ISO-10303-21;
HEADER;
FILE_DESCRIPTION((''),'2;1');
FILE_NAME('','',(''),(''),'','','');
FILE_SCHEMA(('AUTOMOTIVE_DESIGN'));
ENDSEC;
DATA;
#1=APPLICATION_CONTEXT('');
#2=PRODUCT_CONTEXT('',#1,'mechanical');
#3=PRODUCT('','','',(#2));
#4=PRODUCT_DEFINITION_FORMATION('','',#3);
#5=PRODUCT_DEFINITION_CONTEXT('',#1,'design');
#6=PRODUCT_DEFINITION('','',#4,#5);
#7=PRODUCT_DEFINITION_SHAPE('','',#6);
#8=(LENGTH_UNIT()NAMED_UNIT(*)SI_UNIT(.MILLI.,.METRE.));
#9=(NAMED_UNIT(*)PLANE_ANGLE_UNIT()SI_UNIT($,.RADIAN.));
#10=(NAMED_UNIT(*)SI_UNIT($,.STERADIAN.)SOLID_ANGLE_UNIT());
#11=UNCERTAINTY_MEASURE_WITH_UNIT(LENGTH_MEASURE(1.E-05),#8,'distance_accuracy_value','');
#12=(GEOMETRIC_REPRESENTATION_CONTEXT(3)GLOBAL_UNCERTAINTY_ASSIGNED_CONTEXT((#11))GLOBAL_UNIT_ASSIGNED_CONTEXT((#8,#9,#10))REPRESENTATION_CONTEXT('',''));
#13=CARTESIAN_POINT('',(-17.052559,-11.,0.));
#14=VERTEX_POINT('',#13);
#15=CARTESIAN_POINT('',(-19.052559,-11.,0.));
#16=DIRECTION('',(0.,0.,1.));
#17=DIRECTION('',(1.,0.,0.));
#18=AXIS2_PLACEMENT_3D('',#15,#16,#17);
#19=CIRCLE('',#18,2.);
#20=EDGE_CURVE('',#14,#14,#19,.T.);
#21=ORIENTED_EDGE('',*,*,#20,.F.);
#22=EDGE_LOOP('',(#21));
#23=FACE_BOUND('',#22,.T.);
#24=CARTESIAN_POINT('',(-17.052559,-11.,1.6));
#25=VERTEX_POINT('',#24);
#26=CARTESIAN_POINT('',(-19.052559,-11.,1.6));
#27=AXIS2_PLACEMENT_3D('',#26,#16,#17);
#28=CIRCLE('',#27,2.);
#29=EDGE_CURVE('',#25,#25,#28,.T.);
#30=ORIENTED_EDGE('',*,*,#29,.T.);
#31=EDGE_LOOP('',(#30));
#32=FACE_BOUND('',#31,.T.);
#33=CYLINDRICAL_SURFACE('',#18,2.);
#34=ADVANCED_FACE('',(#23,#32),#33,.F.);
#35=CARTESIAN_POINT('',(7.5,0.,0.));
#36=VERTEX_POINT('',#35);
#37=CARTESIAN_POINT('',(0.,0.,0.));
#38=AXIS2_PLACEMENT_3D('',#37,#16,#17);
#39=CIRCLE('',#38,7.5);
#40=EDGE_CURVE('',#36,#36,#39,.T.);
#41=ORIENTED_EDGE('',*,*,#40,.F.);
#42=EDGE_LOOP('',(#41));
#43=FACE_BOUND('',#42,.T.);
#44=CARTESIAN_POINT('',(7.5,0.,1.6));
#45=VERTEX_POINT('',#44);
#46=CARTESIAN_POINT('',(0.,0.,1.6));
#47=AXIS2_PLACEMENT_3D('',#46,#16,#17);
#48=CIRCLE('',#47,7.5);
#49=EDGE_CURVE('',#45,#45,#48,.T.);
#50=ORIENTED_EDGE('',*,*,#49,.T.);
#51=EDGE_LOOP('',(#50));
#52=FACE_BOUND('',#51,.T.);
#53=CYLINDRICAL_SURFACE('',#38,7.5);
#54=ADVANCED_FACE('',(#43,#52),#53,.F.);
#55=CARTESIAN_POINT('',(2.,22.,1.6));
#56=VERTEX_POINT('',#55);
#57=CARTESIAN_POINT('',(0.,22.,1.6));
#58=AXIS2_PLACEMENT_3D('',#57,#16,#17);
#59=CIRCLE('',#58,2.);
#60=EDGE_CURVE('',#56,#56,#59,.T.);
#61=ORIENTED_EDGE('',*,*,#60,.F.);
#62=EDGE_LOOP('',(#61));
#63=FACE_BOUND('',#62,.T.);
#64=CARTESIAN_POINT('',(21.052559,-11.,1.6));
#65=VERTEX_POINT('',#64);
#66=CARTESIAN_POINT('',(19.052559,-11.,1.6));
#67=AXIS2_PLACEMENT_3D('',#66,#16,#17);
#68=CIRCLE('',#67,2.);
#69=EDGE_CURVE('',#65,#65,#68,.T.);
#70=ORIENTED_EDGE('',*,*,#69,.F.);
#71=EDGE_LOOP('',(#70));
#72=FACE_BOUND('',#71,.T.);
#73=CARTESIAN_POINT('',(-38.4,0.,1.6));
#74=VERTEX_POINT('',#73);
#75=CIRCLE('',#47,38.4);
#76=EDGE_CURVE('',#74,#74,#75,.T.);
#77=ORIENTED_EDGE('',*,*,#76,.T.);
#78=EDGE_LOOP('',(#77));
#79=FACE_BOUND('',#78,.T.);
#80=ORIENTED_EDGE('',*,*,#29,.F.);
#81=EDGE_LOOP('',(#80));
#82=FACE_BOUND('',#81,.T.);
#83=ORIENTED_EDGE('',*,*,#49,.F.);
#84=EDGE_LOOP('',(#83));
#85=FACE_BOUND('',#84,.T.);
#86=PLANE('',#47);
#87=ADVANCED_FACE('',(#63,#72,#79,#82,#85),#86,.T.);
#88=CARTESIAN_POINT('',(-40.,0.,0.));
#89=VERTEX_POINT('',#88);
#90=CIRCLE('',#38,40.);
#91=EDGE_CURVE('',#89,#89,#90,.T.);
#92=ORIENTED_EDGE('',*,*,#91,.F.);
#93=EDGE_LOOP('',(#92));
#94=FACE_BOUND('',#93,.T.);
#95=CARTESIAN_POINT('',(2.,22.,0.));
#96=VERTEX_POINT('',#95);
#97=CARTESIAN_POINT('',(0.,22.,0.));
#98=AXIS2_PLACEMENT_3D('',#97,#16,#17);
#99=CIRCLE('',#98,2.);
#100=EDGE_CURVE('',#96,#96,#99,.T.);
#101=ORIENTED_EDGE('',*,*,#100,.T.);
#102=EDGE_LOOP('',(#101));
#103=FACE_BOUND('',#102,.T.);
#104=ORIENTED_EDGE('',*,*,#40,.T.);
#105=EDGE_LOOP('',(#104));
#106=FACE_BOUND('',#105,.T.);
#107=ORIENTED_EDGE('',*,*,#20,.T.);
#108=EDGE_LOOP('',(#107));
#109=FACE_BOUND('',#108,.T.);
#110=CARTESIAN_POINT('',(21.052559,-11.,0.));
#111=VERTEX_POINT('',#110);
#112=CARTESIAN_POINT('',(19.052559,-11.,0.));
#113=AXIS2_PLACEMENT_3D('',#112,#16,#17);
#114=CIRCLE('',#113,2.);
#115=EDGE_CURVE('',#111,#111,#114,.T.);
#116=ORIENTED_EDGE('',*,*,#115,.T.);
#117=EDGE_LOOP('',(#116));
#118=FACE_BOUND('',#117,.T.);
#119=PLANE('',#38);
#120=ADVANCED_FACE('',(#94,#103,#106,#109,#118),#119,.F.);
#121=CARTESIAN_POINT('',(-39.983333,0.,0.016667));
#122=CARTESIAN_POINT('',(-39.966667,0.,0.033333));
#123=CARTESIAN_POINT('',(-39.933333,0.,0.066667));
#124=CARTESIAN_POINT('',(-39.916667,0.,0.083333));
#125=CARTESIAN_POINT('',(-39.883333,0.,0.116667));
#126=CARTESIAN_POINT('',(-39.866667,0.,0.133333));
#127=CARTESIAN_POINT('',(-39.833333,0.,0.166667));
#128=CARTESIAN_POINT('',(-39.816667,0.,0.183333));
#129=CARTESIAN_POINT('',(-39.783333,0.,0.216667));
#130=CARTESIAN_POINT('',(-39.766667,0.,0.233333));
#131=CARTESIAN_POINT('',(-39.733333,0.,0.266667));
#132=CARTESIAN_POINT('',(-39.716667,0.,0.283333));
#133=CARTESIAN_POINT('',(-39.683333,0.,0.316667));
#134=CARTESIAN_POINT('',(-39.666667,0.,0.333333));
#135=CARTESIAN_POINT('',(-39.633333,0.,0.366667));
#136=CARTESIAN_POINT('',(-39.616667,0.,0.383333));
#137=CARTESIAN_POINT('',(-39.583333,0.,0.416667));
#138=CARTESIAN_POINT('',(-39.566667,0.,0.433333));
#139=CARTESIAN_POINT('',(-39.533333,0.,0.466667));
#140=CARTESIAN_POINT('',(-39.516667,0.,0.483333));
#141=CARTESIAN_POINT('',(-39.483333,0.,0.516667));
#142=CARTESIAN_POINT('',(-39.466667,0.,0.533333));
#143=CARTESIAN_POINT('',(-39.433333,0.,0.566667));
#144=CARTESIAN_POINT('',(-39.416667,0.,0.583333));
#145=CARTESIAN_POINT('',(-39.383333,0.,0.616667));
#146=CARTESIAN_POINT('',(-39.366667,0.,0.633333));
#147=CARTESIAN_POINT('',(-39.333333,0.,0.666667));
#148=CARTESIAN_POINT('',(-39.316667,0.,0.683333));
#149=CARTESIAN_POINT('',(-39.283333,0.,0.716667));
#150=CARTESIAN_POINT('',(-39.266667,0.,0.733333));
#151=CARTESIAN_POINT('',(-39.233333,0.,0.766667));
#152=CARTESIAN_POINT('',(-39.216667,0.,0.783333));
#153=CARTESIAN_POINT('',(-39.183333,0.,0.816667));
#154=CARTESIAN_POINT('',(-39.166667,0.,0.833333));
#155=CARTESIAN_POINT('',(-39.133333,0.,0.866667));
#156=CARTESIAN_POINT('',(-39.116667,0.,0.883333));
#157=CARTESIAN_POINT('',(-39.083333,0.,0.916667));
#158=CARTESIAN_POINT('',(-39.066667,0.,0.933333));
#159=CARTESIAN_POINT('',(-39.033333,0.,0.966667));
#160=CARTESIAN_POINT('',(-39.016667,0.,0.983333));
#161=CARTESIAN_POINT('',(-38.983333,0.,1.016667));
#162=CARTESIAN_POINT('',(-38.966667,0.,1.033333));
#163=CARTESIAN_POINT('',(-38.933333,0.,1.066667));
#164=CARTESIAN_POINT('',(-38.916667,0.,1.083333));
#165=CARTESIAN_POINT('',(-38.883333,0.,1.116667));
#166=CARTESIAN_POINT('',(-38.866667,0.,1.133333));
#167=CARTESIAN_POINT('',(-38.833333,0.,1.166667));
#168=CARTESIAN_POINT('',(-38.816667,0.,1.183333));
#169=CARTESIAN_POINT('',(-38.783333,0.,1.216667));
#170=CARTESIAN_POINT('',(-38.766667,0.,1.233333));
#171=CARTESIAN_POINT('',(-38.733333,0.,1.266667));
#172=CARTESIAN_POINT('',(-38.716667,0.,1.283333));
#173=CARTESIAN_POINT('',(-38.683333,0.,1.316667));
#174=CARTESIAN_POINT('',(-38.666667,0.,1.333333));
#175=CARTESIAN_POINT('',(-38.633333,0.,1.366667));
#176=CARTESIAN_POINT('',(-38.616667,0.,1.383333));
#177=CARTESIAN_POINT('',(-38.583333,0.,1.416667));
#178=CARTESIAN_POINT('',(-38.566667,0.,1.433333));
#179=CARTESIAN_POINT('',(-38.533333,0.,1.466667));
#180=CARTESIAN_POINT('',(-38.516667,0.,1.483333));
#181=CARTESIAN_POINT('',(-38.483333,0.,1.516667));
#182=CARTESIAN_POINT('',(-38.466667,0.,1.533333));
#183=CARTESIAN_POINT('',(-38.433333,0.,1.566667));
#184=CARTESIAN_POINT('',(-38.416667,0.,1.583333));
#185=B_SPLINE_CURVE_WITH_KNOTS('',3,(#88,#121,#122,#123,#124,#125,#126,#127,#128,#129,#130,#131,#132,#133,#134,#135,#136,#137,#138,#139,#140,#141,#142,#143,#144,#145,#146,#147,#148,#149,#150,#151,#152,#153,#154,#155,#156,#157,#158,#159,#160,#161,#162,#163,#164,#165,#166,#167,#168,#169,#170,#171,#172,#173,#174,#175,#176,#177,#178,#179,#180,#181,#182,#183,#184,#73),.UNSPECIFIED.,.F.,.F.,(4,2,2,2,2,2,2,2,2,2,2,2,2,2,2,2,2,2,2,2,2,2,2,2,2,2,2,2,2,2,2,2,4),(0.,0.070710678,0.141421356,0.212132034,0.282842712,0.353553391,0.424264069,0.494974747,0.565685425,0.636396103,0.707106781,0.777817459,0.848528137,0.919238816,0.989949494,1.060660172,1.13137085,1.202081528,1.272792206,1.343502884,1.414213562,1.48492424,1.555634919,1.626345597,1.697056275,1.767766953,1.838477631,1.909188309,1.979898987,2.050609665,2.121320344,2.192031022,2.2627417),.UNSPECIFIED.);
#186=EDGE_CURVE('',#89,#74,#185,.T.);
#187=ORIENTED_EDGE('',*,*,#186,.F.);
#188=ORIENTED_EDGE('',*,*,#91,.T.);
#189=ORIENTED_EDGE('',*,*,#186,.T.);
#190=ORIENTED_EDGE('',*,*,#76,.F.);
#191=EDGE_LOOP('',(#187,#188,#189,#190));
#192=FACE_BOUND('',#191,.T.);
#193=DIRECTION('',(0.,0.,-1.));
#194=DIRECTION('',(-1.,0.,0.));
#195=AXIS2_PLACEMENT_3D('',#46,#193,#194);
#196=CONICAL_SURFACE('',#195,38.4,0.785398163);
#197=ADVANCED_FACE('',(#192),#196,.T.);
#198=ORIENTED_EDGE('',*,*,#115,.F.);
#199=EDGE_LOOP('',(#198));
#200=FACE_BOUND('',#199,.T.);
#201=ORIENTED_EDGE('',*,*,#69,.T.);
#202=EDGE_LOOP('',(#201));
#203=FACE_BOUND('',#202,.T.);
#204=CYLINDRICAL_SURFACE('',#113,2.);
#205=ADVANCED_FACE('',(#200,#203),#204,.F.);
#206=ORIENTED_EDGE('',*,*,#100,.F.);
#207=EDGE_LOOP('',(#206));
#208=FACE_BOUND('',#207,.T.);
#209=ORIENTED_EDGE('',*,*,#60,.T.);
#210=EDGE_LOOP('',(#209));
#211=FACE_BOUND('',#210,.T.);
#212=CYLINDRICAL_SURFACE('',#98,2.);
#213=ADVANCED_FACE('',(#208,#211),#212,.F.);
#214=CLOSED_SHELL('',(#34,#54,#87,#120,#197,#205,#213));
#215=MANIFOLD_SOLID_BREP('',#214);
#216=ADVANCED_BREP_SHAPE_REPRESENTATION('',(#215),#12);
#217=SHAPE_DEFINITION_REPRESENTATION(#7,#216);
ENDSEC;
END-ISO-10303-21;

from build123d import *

# Parameters (mm, degrees)
SKETCH1_R           = 40
BOSS_EXTRUDE1_DEPTH = 1.6
SKETCH2_R           = 7.5
SKETCH2_R_2         = 2
CUT_EXTRUDE1_DEPTH  = 1.6
CHAMFER1_SIZE       = 1.6


with BuildPart() as part:
    # Sketch1 → Boss-Extrude1 (new body)
    with BuildSketch(Plane.XY):
        Circle(SKETCH1_R)
    extrude(amount=BOSS_EXTRUDE1_DEPTH)

    # Sketch2 → Cut-Extrude1 (cut)
    with BuildSketch(Plane.XY.offset(1.6)):
        Circle(SKETCH2_R)
        with Locations((0, 22)):
            Circle(SKETCH2_R_2)
        with Locations((19.052558883, -11)):
            Circle(SKETCH2_R_2)
        with Locations((-19.052558883, -11)):
            Circle(SKETCH2_R_2)
    extrude(amount=-CUT_EXTRUDE1_DEPTH, mode=Mode.SUBTRACT)

    # Chamfer1
    chamfer1_edges = [part.edges().sort_by_distance(p)[0] for p in [
        (-40, 0, 1.6),
    ]]
    chamfer(chamfer1_edges, length=CHAMFER1_SIZE - 0.0001)  # a hair under: the kernel refuses the full size


solid = part.part
